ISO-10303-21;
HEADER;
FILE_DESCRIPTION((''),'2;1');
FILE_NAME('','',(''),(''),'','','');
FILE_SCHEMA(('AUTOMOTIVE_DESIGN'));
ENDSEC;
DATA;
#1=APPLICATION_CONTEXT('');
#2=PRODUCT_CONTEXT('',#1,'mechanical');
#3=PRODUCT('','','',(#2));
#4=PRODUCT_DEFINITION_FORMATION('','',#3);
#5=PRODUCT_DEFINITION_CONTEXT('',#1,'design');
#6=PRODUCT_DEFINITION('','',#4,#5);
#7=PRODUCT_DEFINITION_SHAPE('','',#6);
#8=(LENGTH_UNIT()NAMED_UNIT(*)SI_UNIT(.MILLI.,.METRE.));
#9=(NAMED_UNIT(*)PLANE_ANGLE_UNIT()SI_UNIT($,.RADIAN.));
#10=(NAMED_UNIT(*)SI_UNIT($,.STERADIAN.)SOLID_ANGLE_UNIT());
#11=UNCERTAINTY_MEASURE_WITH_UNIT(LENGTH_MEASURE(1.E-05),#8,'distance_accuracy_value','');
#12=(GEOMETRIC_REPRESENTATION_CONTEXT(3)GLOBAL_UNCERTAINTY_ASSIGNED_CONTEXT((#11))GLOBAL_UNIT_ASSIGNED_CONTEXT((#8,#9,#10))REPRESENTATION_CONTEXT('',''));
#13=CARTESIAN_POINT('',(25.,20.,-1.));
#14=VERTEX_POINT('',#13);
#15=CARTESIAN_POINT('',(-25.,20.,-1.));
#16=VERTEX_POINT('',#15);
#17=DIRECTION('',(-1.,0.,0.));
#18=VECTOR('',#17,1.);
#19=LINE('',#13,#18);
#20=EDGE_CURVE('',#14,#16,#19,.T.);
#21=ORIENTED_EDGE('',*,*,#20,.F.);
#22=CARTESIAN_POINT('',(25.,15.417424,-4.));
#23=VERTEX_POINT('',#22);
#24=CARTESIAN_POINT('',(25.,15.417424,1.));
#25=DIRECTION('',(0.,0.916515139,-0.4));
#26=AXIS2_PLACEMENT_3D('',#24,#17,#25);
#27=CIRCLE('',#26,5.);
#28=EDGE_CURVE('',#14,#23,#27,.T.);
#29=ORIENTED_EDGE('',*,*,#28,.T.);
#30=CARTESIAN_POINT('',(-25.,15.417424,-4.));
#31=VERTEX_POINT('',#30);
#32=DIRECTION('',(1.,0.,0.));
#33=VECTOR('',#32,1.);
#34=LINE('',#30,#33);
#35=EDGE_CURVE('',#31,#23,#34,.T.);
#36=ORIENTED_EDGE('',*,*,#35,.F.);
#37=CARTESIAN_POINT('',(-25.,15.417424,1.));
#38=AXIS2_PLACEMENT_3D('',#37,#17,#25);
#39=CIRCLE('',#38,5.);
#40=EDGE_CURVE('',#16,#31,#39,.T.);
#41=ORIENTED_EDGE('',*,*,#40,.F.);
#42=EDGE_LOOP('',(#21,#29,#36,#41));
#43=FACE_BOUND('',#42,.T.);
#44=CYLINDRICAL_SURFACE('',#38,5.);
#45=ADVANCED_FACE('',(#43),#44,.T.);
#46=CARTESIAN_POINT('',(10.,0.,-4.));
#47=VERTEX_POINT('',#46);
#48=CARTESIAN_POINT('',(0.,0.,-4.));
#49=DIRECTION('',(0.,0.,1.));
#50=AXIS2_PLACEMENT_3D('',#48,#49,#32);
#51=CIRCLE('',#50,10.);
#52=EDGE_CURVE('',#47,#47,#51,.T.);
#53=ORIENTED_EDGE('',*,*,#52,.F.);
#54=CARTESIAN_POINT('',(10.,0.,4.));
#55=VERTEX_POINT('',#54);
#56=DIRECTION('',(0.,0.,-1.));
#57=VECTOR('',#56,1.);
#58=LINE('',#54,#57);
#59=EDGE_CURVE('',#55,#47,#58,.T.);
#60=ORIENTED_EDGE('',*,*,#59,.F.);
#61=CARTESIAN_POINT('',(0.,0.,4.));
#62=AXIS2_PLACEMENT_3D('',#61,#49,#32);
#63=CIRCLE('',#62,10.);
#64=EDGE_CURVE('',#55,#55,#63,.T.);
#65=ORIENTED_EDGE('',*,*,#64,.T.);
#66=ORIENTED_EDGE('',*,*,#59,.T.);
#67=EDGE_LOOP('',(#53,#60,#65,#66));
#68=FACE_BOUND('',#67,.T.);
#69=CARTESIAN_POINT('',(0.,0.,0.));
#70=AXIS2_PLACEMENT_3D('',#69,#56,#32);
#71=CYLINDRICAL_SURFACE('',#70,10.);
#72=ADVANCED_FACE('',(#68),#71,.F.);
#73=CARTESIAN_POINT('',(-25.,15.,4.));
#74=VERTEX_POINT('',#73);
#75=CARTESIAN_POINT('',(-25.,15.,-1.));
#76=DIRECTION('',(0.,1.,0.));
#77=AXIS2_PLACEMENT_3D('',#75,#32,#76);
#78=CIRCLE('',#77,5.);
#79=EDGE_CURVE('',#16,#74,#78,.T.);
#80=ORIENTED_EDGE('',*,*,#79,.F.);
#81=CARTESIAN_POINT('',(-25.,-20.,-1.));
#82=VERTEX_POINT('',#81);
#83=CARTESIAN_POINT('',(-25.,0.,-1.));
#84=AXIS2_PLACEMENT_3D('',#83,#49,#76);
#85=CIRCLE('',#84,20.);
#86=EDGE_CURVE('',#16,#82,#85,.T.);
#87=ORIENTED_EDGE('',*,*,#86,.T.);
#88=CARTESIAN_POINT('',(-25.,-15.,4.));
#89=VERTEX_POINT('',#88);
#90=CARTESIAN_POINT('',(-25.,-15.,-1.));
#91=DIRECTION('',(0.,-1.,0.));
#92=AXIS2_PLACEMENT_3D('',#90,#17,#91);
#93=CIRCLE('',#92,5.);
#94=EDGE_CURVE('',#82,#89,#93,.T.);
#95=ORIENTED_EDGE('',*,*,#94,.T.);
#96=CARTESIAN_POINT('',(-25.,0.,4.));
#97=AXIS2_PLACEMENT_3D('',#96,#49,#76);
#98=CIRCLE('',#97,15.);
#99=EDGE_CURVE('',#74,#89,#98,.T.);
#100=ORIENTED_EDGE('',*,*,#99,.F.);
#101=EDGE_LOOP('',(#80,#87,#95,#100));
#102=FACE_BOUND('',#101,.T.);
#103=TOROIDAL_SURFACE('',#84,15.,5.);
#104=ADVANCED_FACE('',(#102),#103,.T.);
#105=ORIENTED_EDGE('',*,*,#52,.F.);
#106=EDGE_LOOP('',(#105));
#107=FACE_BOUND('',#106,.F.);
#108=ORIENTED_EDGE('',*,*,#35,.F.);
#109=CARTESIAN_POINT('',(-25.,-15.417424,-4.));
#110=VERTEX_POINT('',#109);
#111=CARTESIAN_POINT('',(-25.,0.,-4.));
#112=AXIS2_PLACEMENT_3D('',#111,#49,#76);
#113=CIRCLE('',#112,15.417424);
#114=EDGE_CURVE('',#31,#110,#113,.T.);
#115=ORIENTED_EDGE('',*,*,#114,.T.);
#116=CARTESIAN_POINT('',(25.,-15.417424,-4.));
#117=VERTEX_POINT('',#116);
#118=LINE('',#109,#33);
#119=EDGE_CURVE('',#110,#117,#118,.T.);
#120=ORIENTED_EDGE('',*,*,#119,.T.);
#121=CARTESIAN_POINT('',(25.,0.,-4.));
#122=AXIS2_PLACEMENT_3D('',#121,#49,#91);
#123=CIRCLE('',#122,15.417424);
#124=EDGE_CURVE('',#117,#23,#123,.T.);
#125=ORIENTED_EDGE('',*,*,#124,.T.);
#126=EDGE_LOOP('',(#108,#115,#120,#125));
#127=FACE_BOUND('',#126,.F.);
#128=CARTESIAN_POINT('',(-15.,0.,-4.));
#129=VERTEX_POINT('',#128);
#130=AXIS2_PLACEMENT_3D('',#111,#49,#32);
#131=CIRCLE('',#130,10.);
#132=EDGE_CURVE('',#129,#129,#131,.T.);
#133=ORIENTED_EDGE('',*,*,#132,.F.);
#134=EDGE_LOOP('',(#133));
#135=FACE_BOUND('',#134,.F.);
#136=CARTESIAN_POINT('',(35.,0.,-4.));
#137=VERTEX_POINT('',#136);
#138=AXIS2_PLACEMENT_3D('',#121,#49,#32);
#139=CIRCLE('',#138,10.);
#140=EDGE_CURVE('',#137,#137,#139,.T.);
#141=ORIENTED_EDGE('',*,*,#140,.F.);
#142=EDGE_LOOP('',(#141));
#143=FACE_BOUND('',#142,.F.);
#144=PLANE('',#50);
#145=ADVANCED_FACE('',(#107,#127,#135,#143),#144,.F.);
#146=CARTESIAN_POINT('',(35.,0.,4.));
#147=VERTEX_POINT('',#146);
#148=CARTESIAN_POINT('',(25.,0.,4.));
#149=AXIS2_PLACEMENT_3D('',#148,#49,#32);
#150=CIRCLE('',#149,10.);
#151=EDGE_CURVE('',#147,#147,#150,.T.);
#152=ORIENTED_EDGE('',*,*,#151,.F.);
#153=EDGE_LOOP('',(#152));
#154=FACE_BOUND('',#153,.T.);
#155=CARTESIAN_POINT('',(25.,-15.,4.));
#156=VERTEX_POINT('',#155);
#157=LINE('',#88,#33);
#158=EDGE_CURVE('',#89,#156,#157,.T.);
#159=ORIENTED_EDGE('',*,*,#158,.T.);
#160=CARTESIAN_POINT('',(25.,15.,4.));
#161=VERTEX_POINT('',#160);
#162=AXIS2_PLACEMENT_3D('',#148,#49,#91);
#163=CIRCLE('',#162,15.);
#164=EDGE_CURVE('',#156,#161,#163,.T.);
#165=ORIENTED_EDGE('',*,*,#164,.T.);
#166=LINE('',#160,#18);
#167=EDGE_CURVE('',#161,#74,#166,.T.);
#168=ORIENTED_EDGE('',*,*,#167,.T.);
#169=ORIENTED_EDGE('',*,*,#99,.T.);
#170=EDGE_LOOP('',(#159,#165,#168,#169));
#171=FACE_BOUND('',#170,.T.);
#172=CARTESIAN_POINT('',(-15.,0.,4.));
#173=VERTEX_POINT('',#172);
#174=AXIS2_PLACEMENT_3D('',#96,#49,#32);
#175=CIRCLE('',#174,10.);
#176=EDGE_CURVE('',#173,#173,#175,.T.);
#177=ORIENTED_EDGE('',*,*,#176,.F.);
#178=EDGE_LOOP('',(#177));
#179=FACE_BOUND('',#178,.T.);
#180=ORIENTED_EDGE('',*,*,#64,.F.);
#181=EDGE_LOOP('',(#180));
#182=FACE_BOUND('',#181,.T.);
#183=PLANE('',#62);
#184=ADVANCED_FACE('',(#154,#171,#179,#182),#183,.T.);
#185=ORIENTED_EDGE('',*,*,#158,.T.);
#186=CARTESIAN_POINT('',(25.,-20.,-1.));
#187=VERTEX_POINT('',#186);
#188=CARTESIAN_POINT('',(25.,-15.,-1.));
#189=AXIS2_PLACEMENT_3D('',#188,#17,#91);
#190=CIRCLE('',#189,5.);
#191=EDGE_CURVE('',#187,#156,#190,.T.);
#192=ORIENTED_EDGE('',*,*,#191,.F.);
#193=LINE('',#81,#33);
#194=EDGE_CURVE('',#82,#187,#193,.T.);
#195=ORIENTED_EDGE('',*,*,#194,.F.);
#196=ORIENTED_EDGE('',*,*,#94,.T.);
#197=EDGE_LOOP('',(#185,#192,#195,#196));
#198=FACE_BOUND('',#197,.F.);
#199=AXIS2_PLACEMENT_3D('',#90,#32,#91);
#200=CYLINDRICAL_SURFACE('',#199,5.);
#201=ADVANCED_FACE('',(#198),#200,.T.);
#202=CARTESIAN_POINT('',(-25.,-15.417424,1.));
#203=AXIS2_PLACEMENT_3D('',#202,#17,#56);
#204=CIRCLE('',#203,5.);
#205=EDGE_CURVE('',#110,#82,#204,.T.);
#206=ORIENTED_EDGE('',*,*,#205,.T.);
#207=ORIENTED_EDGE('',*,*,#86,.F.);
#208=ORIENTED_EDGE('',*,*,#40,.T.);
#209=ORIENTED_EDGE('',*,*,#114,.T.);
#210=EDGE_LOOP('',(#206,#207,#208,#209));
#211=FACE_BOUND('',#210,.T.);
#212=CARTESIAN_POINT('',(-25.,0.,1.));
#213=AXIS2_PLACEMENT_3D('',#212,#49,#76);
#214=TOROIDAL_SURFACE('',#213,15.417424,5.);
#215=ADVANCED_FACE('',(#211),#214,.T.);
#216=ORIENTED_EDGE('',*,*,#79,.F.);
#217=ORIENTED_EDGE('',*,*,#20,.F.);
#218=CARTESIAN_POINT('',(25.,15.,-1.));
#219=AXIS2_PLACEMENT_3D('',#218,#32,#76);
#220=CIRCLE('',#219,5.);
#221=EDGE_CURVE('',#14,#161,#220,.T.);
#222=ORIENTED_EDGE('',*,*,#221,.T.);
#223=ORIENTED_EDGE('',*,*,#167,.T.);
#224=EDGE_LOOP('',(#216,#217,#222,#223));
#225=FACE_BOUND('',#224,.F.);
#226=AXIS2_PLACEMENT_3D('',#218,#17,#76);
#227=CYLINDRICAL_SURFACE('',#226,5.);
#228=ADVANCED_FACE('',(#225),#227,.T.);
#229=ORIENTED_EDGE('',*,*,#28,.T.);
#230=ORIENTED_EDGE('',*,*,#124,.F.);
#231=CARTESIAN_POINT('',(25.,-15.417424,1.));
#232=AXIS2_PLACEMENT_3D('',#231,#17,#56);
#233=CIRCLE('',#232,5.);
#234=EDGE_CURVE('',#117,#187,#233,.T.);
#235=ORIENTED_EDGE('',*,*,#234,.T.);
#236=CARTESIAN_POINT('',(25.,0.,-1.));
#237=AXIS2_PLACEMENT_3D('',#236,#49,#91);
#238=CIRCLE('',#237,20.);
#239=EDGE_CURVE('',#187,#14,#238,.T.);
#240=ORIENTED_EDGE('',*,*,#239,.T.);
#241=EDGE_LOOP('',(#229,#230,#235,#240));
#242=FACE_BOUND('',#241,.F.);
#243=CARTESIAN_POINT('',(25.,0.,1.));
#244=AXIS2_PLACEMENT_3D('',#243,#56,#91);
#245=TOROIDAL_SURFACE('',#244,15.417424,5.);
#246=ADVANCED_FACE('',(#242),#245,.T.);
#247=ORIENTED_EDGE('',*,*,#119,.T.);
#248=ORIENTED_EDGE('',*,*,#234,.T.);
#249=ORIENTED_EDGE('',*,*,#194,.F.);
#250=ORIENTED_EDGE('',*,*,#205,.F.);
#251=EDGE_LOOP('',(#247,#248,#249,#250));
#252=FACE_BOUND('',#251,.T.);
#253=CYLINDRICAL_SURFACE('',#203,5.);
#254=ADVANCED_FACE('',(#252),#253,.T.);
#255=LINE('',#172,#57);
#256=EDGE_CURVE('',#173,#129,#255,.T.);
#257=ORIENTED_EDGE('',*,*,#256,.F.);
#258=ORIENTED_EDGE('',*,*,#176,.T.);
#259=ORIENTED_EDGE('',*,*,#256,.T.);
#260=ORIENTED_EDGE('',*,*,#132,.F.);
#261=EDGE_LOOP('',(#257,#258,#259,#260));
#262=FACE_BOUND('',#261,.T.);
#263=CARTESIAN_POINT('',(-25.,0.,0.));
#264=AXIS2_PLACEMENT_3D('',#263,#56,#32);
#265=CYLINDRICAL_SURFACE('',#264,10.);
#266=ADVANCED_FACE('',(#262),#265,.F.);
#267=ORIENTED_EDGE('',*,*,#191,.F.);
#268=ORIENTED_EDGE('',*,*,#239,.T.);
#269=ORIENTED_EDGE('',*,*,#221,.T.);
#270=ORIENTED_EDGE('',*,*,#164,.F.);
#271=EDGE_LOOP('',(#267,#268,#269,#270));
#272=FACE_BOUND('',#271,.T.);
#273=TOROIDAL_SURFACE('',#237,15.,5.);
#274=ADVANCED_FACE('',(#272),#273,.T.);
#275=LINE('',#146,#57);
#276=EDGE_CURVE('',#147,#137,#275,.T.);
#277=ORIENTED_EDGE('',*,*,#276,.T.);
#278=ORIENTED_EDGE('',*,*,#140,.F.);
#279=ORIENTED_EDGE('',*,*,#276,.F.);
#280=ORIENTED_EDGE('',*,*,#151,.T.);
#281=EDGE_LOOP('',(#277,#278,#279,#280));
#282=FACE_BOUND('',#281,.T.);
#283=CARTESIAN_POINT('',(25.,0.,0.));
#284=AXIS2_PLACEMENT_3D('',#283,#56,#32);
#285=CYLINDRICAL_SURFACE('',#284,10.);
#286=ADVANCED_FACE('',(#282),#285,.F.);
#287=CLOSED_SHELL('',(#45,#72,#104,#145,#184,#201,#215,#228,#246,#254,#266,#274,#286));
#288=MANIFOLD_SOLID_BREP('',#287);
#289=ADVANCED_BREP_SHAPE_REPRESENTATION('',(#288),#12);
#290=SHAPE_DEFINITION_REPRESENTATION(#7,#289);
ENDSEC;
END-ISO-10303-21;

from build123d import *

# Parameters (mm, degrees)
F0_R        = 10
F1_DEPTH    = 4
F2_R        = 5
F3_T1_DEPTH = 50
F3_T4_ANGLE = 180
F3_T6_ANGLE = 180


# Not quite as in the source:
# - a fillet or chamfer that OpenCascade refuses, or shapes differently, is made with other operations: its cross-section is extruded or revolved along the edge and cut away or added


with BuildPart() as f1:
    # F0 (on Top) → F1 (new body, symmetric)
    with BuildSketch(Plane.XY):
        with BuildLine():
            Line((25, 20), (-25, 20))
            ThreePointArc((-25, 20), (-45, 0), (-25, -20))
            Line((-25, -20), (25, -20))
            ThreePointArc((25, -20), (45, 0), (25, 20))
        make_face()
        with Locations((-25, 0)):
            Circle(F0_R, mode=Mode.SUBTRACT)
        Circle(F0_R, mode=Mode.SUBTRACT)
        with Locations((25, 0)):
            Circle(F0_R, mode=Mode.SUBTRACT)
    extrude(amount=F1_DEPTH, both=True)

    # F2
    f2_edges = [f1.edges().sort_by_distance(p)[0] for p in [
        (0, 20, 4),
        (-45, 0, 4),
        (0, -20, 4),
        (45, 0, 4),
    ]]
    fillet(f2_edges, radius=F2_R)

    # F3: fillet of radius 5 on 4 edges, made by hand

    # F3_s2 → F3_t1 (cut)
    with BuildSketch(Plane.YZ.offset(-25)):
        with BuildLine():
            ThreePointArc((-15.417424305, -4), (-18.1560370926, -3.1833001327), (-20, -1))
            Line((-20, -1), (-20, -4))
            Line((-20, -4), (-15.417424305, -4))
        make_face()
        with BuildLine():
            ThreePointArc((20, -1), (18.1560370926, -3.1833001327), (15.417424305, -4))
            Line((15.417424305, -4), (20, -4))
            Line((20, -4), (20, -1))
        make_face()
    extrude(amount=F3_T1_DEPTH, mode=Mode.SUBTRACT)

    # F3_s3 → F3_t4 (revolve, cut)
    with BuildSketch(Plane.YZ.offset(25)):
        with BuildLine():
            ThreePointArc((-20, -1), (-18.1560370926, -3.1833001327), (-15.417424305, -4))
            Line((-15.417424305, -4), (-20, -4))
            Line((-20, -4), (-20, -1))
        make_face()
    revolve(axis=Axis((25, 0, -4), (0, 0, 1)), revolution_arc=F3_T4_ANGLE, mode=Mode.SUBTRACT)

    # F3_s5 → F3_t6 (revolve, cut)
    with BuildSketch(Plane.YZ.offset(-25)):
        with BuildLine():
            ThreePointArc((15.417424305, -4), (18.1560370926, -3.1833001327), (20, -1))
            Line((20, -1), (20, -4))
            Line((20, -4), (15.417424305, -4))
        make_face()
    revolve(axis=Axis((-25, 0, -4), (0, 0, 1)), revolution_arc=F3_T6_ANGLE, mode=Mode.SUBTRACT)


solid = f1.part
